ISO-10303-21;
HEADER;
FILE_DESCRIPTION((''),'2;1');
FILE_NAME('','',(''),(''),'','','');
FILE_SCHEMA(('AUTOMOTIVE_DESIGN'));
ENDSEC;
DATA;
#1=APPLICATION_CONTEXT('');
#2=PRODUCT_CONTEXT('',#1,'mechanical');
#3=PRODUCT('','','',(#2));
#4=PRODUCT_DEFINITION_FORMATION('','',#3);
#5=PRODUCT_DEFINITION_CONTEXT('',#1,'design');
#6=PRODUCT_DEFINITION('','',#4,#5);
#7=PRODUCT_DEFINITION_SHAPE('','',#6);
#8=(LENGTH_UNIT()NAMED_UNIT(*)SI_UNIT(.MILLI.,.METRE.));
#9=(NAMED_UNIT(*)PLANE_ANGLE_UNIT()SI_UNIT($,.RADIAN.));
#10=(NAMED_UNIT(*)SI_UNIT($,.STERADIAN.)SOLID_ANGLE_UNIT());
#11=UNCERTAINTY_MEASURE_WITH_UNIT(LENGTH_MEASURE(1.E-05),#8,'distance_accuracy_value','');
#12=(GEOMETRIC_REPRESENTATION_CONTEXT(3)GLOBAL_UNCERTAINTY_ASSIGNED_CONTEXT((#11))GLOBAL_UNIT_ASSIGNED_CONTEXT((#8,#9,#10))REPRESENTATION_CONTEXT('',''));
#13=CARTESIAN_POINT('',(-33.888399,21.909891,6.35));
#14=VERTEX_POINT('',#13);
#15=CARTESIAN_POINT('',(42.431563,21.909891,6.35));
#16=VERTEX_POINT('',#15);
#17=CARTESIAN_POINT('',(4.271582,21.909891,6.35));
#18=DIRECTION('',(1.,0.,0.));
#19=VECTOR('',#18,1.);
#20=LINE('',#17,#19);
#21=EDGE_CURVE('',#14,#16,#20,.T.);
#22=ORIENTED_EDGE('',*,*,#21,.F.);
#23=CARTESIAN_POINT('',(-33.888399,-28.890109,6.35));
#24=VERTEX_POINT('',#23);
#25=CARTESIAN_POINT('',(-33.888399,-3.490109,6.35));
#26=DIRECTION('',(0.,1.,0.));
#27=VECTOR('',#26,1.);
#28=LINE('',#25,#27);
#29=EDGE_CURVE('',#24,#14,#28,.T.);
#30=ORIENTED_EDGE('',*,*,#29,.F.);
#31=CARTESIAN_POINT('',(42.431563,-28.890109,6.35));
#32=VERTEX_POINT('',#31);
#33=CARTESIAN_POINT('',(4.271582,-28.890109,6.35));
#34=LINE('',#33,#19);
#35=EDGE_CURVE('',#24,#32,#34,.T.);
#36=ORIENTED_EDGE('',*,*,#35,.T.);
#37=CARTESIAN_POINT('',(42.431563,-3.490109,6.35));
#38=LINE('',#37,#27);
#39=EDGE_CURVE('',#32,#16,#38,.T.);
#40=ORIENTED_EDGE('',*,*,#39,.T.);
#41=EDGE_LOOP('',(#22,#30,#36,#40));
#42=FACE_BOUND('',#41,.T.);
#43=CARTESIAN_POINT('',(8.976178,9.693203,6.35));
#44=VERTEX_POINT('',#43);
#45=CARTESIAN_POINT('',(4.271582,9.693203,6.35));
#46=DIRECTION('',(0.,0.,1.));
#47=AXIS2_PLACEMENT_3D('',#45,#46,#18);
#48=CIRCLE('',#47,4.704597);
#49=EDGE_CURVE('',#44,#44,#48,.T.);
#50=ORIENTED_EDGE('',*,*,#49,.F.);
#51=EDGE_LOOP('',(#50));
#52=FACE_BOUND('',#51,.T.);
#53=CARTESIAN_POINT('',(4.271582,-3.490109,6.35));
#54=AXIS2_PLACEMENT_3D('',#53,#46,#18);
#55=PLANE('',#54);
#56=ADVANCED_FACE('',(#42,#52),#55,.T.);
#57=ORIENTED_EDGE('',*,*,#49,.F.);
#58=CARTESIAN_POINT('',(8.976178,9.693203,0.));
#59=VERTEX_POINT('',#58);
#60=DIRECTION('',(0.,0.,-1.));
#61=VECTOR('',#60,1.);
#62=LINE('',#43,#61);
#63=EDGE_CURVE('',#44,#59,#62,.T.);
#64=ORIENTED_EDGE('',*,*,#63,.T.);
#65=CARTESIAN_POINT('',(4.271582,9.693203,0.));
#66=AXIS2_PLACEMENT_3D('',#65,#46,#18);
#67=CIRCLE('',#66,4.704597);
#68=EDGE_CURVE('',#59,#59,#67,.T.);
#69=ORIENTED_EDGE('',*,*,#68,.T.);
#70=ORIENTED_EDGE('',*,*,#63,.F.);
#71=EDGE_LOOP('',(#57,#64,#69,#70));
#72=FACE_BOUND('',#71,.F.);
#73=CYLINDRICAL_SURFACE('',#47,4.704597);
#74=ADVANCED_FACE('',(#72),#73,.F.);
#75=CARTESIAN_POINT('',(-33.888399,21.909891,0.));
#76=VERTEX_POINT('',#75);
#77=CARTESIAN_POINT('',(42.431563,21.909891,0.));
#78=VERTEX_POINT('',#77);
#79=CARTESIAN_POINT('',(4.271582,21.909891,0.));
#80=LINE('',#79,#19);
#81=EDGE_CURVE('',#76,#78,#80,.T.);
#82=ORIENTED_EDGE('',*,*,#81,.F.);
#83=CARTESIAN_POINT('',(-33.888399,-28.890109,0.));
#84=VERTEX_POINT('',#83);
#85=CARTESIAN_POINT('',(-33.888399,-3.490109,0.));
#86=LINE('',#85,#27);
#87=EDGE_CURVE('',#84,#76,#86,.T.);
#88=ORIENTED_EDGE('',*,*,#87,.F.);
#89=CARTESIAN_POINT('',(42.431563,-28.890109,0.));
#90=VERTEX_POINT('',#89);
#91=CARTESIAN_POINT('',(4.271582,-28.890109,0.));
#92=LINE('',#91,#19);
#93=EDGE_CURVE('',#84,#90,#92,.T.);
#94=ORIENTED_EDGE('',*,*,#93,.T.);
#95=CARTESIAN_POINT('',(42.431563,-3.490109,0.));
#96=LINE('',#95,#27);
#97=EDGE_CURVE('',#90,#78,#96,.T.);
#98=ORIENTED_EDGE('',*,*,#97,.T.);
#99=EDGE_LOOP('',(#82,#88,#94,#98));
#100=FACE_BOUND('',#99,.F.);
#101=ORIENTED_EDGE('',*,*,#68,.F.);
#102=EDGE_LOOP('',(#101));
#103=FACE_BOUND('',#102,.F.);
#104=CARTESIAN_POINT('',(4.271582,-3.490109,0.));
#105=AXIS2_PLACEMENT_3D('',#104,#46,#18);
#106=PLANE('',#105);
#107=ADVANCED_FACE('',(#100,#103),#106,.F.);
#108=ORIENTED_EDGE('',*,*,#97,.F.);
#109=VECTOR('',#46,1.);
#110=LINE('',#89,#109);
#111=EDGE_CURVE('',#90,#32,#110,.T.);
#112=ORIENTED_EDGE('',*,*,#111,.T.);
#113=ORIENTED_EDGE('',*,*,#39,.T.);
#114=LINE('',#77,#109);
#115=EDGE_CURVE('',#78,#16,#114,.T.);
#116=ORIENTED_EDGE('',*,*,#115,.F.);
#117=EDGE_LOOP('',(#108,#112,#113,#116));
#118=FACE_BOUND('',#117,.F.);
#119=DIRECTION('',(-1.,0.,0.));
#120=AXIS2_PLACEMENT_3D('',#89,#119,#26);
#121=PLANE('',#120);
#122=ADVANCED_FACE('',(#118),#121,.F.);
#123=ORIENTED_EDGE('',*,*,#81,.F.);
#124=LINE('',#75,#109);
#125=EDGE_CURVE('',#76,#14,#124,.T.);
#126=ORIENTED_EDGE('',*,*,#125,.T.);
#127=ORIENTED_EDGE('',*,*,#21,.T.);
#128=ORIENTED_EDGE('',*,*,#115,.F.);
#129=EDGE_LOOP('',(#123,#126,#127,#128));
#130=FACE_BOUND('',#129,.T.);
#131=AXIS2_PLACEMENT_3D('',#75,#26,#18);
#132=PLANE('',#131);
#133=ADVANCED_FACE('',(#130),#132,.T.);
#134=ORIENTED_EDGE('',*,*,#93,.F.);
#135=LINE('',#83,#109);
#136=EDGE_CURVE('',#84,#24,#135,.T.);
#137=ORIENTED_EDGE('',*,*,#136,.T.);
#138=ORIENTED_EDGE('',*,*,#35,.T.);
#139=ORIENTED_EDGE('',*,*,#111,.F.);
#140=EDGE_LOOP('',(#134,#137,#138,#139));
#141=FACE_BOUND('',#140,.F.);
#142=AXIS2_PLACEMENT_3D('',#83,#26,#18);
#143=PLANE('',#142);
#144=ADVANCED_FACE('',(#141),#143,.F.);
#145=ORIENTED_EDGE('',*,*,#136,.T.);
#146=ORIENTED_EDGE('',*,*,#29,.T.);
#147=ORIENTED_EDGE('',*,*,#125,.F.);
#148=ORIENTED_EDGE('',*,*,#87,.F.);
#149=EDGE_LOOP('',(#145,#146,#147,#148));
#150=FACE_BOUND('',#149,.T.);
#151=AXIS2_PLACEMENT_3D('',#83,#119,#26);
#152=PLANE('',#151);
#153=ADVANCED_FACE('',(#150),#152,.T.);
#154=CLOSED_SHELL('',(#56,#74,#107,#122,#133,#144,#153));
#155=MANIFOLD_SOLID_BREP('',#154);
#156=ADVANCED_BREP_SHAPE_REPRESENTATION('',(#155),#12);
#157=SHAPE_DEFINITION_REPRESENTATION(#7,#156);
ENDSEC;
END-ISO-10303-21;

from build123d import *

# Parameters (mm, degrees)
F0_W          = 76.319962422
F0_H          = 50.8
F1_DEPTH      = 6.35
F2_R          = 4.7045967167
F3_DEPTH      = 99
F3_DEPTH_BACK = 6.351


# Not quite as in the source:
# - an extrude ends at something that could not be found from the text; its depth is read off the source's solid
# - a feature names something its author has since deleted; it is built from what else it names


with BuildPart() as f1:
    # F0 (on Top) → F1 (new body)
    with BuildSketch(Plane.XY):
        with Locations((4.271581769, -3.4901092946)):
            Rectangle(F0_W, F0_H)
    extrude(amount=F1_DEPTH)

    # F2 (on face) → F3 (cut, two sides)
    with BuildSketch(Plane.XY.offset(6.35)) as f3_sk:
        with Locations((4.271581769, 9.693203494)):
            Circle(F2_R)
    extrude(amount=F3_DEPTH, mode=Mode.SUBTRACT)
    extrude(f3_sk.sketch, amount=-F3_DEPTH_BACK, mode=Mode.SUBTRACT)


solid = f1.part
